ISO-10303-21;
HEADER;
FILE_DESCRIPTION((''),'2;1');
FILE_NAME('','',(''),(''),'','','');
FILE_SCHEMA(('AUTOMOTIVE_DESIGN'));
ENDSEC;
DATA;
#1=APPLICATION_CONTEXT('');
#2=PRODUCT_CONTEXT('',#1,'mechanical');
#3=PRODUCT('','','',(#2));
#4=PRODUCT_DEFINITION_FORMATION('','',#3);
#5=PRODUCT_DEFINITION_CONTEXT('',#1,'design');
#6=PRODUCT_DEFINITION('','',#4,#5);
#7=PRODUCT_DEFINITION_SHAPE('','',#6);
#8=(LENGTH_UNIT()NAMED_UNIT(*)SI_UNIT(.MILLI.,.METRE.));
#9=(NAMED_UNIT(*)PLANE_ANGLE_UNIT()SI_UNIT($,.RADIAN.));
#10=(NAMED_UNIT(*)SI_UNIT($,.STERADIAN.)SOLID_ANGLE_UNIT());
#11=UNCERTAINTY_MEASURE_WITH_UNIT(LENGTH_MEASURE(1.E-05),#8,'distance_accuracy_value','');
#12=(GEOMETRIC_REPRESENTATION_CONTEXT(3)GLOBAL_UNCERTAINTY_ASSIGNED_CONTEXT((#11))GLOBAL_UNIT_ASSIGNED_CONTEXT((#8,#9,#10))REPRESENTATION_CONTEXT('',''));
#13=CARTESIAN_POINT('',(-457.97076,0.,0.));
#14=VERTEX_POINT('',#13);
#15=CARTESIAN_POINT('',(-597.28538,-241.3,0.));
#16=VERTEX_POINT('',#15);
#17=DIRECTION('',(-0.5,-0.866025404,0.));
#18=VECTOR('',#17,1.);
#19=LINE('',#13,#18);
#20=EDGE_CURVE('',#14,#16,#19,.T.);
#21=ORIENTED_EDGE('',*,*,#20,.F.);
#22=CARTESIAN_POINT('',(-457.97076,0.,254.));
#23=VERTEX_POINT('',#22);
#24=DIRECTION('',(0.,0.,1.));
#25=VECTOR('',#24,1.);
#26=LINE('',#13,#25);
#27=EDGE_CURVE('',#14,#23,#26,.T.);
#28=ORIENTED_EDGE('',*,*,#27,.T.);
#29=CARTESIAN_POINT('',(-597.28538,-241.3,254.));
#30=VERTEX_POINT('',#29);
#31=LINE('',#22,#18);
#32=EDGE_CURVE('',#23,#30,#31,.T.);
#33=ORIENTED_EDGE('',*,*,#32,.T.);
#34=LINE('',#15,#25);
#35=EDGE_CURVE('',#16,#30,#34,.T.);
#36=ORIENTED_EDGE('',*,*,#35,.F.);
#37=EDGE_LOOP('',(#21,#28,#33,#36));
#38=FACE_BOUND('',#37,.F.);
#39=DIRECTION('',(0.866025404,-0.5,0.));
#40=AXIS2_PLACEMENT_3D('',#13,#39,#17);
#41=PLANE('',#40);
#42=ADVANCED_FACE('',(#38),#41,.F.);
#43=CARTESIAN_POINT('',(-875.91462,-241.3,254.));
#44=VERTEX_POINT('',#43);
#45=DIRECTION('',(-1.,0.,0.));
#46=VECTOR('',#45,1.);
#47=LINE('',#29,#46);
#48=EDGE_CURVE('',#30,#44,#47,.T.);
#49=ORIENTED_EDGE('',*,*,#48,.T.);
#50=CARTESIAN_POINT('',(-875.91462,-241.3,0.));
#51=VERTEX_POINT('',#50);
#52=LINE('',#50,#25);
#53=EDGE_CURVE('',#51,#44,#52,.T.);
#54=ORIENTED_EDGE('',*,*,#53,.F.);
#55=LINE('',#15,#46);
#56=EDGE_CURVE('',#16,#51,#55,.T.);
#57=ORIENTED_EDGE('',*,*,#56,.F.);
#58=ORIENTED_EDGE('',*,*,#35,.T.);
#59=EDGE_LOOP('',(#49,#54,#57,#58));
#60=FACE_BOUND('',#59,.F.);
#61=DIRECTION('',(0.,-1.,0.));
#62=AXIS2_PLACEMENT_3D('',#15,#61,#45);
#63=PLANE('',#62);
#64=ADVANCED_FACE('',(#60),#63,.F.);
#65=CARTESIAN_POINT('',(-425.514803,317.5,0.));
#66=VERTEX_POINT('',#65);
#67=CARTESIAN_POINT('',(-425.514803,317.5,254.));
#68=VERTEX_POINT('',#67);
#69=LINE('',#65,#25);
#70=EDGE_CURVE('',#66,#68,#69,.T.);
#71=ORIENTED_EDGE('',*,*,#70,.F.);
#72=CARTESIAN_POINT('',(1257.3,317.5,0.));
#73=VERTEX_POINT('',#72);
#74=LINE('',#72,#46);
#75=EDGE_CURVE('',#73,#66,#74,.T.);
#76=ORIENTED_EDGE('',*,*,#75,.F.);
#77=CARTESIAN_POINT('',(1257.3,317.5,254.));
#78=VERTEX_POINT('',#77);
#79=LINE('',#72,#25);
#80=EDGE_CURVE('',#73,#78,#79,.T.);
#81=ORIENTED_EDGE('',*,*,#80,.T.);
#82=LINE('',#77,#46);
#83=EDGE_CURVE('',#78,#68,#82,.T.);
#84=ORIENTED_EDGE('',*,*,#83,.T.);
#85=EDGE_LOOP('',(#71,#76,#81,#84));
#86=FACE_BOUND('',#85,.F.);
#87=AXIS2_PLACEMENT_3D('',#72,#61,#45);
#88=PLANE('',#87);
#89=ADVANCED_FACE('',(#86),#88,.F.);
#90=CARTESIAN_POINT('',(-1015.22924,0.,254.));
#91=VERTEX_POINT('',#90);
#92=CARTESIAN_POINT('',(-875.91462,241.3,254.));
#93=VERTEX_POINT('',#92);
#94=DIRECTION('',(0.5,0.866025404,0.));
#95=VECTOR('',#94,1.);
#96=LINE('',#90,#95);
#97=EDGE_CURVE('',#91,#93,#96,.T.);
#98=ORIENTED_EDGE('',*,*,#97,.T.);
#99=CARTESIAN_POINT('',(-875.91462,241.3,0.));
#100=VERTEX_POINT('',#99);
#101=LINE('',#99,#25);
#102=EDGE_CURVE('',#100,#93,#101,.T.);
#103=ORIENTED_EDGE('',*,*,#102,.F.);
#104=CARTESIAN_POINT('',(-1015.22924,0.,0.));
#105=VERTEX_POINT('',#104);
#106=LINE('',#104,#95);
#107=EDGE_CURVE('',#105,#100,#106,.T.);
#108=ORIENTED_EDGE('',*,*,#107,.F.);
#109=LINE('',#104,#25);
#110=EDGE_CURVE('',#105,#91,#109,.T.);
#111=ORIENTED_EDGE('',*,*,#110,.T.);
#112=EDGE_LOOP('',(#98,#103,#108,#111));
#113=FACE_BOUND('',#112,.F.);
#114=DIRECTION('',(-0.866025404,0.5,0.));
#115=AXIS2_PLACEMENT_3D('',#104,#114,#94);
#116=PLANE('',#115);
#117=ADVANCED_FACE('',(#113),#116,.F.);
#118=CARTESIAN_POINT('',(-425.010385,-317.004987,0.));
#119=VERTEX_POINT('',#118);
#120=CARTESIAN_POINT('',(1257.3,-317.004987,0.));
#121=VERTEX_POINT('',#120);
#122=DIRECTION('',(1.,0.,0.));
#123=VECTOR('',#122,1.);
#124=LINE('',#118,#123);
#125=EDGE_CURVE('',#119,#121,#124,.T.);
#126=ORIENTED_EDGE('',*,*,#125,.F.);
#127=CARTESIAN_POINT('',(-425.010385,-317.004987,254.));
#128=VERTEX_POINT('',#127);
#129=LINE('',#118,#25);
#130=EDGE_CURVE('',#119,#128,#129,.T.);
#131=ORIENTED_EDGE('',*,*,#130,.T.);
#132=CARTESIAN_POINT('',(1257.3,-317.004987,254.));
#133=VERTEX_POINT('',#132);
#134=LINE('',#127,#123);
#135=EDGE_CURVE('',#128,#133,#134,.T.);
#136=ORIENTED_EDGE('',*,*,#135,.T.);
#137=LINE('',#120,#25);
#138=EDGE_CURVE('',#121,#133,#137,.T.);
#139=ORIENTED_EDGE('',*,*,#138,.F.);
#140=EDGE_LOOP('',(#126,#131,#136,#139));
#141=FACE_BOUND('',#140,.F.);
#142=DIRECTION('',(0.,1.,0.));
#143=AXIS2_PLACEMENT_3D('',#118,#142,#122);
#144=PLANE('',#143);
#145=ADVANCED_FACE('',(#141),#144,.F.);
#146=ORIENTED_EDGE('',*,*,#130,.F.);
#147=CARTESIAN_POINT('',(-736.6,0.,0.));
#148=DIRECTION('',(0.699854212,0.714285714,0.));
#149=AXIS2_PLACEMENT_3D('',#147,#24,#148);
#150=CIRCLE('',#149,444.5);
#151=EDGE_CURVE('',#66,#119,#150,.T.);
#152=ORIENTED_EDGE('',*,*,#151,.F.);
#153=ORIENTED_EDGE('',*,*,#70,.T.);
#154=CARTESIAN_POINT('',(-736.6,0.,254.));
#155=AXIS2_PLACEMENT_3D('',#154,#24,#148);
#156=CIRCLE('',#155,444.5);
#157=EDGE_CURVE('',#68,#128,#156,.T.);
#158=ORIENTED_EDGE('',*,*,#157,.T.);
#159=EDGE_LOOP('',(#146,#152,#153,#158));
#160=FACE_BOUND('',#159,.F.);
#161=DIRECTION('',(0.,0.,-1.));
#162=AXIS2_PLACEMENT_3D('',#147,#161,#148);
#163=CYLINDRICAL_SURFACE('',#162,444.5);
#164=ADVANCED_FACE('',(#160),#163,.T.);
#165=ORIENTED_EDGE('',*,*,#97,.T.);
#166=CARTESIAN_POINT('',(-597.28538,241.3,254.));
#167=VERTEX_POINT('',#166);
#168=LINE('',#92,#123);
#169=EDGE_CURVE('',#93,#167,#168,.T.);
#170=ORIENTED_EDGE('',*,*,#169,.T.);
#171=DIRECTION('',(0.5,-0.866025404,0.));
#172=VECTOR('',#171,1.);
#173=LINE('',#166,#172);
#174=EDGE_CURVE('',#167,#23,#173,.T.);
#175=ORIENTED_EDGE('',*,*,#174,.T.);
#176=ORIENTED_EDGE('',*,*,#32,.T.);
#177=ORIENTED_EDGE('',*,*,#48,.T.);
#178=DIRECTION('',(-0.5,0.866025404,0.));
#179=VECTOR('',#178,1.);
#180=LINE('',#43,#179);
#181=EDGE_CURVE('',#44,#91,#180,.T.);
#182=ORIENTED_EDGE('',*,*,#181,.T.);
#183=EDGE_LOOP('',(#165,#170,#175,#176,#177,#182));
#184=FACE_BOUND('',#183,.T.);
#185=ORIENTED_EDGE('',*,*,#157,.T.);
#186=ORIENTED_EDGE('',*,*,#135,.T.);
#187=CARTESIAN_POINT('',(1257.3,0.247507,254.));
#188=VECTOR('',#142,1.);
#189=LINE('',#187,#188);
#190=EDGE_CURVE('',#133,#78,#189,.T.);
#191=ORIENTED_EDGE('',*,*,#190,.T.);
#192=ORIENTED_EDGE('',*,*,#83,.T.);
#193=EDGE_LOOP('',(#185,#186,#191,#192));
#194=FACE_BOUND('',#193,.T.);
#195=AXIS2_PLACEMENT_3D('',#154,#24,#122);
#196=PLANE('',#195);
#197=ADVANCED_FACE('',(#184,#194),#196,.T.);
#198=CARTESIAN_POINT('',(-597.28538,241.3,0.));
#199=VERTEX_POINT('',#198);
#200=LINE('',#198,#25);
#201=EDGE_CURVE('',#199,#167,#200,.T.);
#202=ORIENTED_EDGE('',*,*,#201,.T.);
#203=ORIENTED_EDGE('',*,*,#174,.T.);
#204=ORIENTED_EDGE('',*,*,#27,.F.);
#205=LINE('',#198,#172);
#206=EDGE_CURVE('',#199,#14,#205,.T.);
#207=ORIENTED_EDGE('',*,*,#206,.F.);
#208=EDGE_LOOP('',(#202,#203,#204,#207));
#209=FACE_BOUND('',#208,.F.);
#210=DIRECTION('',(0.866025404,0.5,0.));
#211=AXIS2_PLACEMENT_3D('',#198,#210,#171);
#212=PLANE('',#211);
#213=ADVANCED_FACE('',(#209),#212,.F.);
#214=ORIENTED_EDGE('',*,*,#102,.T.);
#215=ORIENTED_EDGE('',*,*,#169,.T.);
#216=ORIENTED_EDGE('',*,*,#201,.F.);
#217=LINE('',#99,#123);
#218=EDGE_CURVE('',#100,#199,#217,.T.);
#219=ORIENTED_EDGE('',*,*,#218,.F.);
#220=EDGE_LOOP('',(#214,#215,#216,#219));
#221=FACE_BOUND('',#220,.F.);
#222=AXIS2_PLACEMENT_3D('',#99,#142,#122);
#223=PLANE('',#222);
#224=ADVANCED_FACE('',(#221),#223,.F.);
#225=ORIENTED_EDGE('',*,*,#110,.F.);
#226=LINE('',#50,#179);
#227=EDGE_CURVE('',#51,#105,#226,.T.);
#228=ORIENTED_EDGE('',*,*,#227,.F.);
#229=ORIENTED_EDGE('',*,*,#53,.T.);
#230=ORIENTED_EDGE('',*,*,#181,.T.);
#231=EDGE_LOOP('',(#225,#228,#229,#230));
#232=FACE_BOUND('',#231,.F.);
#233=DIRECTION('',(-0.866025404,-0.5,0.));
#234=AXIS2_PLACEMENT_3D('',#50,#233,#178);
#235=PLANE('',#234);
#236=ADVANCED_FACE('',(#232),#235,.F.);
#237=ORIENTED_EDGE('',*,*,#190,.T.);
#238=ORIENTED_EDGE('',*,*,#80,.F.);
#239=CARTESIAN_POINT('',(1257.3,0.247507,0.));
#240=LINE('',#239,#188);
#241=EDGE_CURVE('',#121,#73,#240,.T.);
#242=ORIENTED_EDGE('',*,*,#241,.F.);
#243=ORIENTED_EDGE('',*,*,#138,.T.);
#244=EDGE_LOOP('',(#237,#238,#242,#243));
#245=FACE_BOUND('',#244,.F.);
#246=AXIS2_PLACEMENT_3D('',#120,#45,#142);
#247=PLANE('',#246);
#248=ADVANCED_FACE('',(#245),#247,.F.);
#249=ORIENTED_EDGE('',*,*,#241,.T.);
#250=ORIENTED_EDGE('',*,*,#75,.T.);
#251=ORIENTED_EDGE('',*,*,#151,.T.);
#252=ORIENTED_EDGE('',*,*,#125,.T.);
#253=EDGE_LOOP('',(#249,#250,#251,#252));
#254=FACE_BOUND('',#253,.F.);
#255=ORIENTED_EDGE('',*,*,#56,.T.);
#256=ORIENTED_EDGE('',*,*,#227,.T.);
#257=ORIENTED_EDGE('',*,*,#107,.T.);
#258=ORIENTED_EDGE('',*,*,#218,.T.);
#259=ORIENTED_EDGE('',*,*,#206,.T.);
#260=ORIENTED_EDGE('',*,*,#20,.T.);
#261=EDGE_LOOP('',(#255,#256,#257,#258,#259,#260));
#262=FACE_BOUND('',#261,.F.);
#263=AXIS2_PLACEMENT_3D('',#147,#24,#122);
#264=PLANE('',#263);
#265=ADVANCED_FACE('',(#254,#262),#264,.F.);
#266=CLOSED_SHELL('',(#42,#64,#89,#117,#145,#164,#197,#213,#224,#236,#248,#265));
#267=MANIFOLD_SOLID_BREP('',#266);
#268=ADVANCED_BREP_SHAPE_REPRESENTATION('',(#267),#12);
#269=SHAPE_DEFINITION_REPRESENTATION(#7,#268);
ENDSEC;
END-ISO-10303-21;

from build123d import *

# Parameters (mm, degrees)
F0_W     = 1257.3
F0_H     = 634.5049866525
F1_DEPTH = 254


# Not quite as in the source:
# - a feature names something its author has since deleted; it is built from what else it names


with BuildPart() as f1:
    # F0 (on Top) → F1 (new body)
    with BuildSketch(Plane.XY):
        with BuildLine():
            ThreePointArc((-425.0103845802, -317.0049866525), (-326.6720587383, -171.8701049425), (-292.1, 0))
            ThreePointArc((-292.1, 0), (-326.8088213402, 172.1959345996), (-425.5148026665, 317.5))
            ThreePointArc((-425.5148026665, 317.5), (-1181.09985954, -0.3533680164), (-425.0103845802, -317.0049866525))
        make_face()
        Polygon((-875.9146199555, 241.3), (-597.2853800445, 241.3), (-457.9707600891, 0), (-597.2853800445, -241.3), (-875.9146199555, -241.3), (-1015.2292399109, 0), align=None, mode=Mode.SUBTRACT)
        with Locations((628.65, 0.2475066738)):
            Rectangle(F0_W, F0_H)
        with BuildLine():
            ThreePointArc((-425.5148026665, 317.5), (-326.8088213402, 172.1959345996), (-292.1, 0))
            ThreePointArc((-292.1, 0), (-326.6720587383, -171.8701049425), (-425.0103845802, -317.0049866525))
            Line((-425.0103845802, -317.0049866525), (0, -317.0049866525))
            Line((0, -317.0049866525), (0, 317.5))
            Line((0, 317.5), (-425.5148026665, 317.5))
        make_face()
    extrude(amount=F1_DEPTH)


solid = f1.part
